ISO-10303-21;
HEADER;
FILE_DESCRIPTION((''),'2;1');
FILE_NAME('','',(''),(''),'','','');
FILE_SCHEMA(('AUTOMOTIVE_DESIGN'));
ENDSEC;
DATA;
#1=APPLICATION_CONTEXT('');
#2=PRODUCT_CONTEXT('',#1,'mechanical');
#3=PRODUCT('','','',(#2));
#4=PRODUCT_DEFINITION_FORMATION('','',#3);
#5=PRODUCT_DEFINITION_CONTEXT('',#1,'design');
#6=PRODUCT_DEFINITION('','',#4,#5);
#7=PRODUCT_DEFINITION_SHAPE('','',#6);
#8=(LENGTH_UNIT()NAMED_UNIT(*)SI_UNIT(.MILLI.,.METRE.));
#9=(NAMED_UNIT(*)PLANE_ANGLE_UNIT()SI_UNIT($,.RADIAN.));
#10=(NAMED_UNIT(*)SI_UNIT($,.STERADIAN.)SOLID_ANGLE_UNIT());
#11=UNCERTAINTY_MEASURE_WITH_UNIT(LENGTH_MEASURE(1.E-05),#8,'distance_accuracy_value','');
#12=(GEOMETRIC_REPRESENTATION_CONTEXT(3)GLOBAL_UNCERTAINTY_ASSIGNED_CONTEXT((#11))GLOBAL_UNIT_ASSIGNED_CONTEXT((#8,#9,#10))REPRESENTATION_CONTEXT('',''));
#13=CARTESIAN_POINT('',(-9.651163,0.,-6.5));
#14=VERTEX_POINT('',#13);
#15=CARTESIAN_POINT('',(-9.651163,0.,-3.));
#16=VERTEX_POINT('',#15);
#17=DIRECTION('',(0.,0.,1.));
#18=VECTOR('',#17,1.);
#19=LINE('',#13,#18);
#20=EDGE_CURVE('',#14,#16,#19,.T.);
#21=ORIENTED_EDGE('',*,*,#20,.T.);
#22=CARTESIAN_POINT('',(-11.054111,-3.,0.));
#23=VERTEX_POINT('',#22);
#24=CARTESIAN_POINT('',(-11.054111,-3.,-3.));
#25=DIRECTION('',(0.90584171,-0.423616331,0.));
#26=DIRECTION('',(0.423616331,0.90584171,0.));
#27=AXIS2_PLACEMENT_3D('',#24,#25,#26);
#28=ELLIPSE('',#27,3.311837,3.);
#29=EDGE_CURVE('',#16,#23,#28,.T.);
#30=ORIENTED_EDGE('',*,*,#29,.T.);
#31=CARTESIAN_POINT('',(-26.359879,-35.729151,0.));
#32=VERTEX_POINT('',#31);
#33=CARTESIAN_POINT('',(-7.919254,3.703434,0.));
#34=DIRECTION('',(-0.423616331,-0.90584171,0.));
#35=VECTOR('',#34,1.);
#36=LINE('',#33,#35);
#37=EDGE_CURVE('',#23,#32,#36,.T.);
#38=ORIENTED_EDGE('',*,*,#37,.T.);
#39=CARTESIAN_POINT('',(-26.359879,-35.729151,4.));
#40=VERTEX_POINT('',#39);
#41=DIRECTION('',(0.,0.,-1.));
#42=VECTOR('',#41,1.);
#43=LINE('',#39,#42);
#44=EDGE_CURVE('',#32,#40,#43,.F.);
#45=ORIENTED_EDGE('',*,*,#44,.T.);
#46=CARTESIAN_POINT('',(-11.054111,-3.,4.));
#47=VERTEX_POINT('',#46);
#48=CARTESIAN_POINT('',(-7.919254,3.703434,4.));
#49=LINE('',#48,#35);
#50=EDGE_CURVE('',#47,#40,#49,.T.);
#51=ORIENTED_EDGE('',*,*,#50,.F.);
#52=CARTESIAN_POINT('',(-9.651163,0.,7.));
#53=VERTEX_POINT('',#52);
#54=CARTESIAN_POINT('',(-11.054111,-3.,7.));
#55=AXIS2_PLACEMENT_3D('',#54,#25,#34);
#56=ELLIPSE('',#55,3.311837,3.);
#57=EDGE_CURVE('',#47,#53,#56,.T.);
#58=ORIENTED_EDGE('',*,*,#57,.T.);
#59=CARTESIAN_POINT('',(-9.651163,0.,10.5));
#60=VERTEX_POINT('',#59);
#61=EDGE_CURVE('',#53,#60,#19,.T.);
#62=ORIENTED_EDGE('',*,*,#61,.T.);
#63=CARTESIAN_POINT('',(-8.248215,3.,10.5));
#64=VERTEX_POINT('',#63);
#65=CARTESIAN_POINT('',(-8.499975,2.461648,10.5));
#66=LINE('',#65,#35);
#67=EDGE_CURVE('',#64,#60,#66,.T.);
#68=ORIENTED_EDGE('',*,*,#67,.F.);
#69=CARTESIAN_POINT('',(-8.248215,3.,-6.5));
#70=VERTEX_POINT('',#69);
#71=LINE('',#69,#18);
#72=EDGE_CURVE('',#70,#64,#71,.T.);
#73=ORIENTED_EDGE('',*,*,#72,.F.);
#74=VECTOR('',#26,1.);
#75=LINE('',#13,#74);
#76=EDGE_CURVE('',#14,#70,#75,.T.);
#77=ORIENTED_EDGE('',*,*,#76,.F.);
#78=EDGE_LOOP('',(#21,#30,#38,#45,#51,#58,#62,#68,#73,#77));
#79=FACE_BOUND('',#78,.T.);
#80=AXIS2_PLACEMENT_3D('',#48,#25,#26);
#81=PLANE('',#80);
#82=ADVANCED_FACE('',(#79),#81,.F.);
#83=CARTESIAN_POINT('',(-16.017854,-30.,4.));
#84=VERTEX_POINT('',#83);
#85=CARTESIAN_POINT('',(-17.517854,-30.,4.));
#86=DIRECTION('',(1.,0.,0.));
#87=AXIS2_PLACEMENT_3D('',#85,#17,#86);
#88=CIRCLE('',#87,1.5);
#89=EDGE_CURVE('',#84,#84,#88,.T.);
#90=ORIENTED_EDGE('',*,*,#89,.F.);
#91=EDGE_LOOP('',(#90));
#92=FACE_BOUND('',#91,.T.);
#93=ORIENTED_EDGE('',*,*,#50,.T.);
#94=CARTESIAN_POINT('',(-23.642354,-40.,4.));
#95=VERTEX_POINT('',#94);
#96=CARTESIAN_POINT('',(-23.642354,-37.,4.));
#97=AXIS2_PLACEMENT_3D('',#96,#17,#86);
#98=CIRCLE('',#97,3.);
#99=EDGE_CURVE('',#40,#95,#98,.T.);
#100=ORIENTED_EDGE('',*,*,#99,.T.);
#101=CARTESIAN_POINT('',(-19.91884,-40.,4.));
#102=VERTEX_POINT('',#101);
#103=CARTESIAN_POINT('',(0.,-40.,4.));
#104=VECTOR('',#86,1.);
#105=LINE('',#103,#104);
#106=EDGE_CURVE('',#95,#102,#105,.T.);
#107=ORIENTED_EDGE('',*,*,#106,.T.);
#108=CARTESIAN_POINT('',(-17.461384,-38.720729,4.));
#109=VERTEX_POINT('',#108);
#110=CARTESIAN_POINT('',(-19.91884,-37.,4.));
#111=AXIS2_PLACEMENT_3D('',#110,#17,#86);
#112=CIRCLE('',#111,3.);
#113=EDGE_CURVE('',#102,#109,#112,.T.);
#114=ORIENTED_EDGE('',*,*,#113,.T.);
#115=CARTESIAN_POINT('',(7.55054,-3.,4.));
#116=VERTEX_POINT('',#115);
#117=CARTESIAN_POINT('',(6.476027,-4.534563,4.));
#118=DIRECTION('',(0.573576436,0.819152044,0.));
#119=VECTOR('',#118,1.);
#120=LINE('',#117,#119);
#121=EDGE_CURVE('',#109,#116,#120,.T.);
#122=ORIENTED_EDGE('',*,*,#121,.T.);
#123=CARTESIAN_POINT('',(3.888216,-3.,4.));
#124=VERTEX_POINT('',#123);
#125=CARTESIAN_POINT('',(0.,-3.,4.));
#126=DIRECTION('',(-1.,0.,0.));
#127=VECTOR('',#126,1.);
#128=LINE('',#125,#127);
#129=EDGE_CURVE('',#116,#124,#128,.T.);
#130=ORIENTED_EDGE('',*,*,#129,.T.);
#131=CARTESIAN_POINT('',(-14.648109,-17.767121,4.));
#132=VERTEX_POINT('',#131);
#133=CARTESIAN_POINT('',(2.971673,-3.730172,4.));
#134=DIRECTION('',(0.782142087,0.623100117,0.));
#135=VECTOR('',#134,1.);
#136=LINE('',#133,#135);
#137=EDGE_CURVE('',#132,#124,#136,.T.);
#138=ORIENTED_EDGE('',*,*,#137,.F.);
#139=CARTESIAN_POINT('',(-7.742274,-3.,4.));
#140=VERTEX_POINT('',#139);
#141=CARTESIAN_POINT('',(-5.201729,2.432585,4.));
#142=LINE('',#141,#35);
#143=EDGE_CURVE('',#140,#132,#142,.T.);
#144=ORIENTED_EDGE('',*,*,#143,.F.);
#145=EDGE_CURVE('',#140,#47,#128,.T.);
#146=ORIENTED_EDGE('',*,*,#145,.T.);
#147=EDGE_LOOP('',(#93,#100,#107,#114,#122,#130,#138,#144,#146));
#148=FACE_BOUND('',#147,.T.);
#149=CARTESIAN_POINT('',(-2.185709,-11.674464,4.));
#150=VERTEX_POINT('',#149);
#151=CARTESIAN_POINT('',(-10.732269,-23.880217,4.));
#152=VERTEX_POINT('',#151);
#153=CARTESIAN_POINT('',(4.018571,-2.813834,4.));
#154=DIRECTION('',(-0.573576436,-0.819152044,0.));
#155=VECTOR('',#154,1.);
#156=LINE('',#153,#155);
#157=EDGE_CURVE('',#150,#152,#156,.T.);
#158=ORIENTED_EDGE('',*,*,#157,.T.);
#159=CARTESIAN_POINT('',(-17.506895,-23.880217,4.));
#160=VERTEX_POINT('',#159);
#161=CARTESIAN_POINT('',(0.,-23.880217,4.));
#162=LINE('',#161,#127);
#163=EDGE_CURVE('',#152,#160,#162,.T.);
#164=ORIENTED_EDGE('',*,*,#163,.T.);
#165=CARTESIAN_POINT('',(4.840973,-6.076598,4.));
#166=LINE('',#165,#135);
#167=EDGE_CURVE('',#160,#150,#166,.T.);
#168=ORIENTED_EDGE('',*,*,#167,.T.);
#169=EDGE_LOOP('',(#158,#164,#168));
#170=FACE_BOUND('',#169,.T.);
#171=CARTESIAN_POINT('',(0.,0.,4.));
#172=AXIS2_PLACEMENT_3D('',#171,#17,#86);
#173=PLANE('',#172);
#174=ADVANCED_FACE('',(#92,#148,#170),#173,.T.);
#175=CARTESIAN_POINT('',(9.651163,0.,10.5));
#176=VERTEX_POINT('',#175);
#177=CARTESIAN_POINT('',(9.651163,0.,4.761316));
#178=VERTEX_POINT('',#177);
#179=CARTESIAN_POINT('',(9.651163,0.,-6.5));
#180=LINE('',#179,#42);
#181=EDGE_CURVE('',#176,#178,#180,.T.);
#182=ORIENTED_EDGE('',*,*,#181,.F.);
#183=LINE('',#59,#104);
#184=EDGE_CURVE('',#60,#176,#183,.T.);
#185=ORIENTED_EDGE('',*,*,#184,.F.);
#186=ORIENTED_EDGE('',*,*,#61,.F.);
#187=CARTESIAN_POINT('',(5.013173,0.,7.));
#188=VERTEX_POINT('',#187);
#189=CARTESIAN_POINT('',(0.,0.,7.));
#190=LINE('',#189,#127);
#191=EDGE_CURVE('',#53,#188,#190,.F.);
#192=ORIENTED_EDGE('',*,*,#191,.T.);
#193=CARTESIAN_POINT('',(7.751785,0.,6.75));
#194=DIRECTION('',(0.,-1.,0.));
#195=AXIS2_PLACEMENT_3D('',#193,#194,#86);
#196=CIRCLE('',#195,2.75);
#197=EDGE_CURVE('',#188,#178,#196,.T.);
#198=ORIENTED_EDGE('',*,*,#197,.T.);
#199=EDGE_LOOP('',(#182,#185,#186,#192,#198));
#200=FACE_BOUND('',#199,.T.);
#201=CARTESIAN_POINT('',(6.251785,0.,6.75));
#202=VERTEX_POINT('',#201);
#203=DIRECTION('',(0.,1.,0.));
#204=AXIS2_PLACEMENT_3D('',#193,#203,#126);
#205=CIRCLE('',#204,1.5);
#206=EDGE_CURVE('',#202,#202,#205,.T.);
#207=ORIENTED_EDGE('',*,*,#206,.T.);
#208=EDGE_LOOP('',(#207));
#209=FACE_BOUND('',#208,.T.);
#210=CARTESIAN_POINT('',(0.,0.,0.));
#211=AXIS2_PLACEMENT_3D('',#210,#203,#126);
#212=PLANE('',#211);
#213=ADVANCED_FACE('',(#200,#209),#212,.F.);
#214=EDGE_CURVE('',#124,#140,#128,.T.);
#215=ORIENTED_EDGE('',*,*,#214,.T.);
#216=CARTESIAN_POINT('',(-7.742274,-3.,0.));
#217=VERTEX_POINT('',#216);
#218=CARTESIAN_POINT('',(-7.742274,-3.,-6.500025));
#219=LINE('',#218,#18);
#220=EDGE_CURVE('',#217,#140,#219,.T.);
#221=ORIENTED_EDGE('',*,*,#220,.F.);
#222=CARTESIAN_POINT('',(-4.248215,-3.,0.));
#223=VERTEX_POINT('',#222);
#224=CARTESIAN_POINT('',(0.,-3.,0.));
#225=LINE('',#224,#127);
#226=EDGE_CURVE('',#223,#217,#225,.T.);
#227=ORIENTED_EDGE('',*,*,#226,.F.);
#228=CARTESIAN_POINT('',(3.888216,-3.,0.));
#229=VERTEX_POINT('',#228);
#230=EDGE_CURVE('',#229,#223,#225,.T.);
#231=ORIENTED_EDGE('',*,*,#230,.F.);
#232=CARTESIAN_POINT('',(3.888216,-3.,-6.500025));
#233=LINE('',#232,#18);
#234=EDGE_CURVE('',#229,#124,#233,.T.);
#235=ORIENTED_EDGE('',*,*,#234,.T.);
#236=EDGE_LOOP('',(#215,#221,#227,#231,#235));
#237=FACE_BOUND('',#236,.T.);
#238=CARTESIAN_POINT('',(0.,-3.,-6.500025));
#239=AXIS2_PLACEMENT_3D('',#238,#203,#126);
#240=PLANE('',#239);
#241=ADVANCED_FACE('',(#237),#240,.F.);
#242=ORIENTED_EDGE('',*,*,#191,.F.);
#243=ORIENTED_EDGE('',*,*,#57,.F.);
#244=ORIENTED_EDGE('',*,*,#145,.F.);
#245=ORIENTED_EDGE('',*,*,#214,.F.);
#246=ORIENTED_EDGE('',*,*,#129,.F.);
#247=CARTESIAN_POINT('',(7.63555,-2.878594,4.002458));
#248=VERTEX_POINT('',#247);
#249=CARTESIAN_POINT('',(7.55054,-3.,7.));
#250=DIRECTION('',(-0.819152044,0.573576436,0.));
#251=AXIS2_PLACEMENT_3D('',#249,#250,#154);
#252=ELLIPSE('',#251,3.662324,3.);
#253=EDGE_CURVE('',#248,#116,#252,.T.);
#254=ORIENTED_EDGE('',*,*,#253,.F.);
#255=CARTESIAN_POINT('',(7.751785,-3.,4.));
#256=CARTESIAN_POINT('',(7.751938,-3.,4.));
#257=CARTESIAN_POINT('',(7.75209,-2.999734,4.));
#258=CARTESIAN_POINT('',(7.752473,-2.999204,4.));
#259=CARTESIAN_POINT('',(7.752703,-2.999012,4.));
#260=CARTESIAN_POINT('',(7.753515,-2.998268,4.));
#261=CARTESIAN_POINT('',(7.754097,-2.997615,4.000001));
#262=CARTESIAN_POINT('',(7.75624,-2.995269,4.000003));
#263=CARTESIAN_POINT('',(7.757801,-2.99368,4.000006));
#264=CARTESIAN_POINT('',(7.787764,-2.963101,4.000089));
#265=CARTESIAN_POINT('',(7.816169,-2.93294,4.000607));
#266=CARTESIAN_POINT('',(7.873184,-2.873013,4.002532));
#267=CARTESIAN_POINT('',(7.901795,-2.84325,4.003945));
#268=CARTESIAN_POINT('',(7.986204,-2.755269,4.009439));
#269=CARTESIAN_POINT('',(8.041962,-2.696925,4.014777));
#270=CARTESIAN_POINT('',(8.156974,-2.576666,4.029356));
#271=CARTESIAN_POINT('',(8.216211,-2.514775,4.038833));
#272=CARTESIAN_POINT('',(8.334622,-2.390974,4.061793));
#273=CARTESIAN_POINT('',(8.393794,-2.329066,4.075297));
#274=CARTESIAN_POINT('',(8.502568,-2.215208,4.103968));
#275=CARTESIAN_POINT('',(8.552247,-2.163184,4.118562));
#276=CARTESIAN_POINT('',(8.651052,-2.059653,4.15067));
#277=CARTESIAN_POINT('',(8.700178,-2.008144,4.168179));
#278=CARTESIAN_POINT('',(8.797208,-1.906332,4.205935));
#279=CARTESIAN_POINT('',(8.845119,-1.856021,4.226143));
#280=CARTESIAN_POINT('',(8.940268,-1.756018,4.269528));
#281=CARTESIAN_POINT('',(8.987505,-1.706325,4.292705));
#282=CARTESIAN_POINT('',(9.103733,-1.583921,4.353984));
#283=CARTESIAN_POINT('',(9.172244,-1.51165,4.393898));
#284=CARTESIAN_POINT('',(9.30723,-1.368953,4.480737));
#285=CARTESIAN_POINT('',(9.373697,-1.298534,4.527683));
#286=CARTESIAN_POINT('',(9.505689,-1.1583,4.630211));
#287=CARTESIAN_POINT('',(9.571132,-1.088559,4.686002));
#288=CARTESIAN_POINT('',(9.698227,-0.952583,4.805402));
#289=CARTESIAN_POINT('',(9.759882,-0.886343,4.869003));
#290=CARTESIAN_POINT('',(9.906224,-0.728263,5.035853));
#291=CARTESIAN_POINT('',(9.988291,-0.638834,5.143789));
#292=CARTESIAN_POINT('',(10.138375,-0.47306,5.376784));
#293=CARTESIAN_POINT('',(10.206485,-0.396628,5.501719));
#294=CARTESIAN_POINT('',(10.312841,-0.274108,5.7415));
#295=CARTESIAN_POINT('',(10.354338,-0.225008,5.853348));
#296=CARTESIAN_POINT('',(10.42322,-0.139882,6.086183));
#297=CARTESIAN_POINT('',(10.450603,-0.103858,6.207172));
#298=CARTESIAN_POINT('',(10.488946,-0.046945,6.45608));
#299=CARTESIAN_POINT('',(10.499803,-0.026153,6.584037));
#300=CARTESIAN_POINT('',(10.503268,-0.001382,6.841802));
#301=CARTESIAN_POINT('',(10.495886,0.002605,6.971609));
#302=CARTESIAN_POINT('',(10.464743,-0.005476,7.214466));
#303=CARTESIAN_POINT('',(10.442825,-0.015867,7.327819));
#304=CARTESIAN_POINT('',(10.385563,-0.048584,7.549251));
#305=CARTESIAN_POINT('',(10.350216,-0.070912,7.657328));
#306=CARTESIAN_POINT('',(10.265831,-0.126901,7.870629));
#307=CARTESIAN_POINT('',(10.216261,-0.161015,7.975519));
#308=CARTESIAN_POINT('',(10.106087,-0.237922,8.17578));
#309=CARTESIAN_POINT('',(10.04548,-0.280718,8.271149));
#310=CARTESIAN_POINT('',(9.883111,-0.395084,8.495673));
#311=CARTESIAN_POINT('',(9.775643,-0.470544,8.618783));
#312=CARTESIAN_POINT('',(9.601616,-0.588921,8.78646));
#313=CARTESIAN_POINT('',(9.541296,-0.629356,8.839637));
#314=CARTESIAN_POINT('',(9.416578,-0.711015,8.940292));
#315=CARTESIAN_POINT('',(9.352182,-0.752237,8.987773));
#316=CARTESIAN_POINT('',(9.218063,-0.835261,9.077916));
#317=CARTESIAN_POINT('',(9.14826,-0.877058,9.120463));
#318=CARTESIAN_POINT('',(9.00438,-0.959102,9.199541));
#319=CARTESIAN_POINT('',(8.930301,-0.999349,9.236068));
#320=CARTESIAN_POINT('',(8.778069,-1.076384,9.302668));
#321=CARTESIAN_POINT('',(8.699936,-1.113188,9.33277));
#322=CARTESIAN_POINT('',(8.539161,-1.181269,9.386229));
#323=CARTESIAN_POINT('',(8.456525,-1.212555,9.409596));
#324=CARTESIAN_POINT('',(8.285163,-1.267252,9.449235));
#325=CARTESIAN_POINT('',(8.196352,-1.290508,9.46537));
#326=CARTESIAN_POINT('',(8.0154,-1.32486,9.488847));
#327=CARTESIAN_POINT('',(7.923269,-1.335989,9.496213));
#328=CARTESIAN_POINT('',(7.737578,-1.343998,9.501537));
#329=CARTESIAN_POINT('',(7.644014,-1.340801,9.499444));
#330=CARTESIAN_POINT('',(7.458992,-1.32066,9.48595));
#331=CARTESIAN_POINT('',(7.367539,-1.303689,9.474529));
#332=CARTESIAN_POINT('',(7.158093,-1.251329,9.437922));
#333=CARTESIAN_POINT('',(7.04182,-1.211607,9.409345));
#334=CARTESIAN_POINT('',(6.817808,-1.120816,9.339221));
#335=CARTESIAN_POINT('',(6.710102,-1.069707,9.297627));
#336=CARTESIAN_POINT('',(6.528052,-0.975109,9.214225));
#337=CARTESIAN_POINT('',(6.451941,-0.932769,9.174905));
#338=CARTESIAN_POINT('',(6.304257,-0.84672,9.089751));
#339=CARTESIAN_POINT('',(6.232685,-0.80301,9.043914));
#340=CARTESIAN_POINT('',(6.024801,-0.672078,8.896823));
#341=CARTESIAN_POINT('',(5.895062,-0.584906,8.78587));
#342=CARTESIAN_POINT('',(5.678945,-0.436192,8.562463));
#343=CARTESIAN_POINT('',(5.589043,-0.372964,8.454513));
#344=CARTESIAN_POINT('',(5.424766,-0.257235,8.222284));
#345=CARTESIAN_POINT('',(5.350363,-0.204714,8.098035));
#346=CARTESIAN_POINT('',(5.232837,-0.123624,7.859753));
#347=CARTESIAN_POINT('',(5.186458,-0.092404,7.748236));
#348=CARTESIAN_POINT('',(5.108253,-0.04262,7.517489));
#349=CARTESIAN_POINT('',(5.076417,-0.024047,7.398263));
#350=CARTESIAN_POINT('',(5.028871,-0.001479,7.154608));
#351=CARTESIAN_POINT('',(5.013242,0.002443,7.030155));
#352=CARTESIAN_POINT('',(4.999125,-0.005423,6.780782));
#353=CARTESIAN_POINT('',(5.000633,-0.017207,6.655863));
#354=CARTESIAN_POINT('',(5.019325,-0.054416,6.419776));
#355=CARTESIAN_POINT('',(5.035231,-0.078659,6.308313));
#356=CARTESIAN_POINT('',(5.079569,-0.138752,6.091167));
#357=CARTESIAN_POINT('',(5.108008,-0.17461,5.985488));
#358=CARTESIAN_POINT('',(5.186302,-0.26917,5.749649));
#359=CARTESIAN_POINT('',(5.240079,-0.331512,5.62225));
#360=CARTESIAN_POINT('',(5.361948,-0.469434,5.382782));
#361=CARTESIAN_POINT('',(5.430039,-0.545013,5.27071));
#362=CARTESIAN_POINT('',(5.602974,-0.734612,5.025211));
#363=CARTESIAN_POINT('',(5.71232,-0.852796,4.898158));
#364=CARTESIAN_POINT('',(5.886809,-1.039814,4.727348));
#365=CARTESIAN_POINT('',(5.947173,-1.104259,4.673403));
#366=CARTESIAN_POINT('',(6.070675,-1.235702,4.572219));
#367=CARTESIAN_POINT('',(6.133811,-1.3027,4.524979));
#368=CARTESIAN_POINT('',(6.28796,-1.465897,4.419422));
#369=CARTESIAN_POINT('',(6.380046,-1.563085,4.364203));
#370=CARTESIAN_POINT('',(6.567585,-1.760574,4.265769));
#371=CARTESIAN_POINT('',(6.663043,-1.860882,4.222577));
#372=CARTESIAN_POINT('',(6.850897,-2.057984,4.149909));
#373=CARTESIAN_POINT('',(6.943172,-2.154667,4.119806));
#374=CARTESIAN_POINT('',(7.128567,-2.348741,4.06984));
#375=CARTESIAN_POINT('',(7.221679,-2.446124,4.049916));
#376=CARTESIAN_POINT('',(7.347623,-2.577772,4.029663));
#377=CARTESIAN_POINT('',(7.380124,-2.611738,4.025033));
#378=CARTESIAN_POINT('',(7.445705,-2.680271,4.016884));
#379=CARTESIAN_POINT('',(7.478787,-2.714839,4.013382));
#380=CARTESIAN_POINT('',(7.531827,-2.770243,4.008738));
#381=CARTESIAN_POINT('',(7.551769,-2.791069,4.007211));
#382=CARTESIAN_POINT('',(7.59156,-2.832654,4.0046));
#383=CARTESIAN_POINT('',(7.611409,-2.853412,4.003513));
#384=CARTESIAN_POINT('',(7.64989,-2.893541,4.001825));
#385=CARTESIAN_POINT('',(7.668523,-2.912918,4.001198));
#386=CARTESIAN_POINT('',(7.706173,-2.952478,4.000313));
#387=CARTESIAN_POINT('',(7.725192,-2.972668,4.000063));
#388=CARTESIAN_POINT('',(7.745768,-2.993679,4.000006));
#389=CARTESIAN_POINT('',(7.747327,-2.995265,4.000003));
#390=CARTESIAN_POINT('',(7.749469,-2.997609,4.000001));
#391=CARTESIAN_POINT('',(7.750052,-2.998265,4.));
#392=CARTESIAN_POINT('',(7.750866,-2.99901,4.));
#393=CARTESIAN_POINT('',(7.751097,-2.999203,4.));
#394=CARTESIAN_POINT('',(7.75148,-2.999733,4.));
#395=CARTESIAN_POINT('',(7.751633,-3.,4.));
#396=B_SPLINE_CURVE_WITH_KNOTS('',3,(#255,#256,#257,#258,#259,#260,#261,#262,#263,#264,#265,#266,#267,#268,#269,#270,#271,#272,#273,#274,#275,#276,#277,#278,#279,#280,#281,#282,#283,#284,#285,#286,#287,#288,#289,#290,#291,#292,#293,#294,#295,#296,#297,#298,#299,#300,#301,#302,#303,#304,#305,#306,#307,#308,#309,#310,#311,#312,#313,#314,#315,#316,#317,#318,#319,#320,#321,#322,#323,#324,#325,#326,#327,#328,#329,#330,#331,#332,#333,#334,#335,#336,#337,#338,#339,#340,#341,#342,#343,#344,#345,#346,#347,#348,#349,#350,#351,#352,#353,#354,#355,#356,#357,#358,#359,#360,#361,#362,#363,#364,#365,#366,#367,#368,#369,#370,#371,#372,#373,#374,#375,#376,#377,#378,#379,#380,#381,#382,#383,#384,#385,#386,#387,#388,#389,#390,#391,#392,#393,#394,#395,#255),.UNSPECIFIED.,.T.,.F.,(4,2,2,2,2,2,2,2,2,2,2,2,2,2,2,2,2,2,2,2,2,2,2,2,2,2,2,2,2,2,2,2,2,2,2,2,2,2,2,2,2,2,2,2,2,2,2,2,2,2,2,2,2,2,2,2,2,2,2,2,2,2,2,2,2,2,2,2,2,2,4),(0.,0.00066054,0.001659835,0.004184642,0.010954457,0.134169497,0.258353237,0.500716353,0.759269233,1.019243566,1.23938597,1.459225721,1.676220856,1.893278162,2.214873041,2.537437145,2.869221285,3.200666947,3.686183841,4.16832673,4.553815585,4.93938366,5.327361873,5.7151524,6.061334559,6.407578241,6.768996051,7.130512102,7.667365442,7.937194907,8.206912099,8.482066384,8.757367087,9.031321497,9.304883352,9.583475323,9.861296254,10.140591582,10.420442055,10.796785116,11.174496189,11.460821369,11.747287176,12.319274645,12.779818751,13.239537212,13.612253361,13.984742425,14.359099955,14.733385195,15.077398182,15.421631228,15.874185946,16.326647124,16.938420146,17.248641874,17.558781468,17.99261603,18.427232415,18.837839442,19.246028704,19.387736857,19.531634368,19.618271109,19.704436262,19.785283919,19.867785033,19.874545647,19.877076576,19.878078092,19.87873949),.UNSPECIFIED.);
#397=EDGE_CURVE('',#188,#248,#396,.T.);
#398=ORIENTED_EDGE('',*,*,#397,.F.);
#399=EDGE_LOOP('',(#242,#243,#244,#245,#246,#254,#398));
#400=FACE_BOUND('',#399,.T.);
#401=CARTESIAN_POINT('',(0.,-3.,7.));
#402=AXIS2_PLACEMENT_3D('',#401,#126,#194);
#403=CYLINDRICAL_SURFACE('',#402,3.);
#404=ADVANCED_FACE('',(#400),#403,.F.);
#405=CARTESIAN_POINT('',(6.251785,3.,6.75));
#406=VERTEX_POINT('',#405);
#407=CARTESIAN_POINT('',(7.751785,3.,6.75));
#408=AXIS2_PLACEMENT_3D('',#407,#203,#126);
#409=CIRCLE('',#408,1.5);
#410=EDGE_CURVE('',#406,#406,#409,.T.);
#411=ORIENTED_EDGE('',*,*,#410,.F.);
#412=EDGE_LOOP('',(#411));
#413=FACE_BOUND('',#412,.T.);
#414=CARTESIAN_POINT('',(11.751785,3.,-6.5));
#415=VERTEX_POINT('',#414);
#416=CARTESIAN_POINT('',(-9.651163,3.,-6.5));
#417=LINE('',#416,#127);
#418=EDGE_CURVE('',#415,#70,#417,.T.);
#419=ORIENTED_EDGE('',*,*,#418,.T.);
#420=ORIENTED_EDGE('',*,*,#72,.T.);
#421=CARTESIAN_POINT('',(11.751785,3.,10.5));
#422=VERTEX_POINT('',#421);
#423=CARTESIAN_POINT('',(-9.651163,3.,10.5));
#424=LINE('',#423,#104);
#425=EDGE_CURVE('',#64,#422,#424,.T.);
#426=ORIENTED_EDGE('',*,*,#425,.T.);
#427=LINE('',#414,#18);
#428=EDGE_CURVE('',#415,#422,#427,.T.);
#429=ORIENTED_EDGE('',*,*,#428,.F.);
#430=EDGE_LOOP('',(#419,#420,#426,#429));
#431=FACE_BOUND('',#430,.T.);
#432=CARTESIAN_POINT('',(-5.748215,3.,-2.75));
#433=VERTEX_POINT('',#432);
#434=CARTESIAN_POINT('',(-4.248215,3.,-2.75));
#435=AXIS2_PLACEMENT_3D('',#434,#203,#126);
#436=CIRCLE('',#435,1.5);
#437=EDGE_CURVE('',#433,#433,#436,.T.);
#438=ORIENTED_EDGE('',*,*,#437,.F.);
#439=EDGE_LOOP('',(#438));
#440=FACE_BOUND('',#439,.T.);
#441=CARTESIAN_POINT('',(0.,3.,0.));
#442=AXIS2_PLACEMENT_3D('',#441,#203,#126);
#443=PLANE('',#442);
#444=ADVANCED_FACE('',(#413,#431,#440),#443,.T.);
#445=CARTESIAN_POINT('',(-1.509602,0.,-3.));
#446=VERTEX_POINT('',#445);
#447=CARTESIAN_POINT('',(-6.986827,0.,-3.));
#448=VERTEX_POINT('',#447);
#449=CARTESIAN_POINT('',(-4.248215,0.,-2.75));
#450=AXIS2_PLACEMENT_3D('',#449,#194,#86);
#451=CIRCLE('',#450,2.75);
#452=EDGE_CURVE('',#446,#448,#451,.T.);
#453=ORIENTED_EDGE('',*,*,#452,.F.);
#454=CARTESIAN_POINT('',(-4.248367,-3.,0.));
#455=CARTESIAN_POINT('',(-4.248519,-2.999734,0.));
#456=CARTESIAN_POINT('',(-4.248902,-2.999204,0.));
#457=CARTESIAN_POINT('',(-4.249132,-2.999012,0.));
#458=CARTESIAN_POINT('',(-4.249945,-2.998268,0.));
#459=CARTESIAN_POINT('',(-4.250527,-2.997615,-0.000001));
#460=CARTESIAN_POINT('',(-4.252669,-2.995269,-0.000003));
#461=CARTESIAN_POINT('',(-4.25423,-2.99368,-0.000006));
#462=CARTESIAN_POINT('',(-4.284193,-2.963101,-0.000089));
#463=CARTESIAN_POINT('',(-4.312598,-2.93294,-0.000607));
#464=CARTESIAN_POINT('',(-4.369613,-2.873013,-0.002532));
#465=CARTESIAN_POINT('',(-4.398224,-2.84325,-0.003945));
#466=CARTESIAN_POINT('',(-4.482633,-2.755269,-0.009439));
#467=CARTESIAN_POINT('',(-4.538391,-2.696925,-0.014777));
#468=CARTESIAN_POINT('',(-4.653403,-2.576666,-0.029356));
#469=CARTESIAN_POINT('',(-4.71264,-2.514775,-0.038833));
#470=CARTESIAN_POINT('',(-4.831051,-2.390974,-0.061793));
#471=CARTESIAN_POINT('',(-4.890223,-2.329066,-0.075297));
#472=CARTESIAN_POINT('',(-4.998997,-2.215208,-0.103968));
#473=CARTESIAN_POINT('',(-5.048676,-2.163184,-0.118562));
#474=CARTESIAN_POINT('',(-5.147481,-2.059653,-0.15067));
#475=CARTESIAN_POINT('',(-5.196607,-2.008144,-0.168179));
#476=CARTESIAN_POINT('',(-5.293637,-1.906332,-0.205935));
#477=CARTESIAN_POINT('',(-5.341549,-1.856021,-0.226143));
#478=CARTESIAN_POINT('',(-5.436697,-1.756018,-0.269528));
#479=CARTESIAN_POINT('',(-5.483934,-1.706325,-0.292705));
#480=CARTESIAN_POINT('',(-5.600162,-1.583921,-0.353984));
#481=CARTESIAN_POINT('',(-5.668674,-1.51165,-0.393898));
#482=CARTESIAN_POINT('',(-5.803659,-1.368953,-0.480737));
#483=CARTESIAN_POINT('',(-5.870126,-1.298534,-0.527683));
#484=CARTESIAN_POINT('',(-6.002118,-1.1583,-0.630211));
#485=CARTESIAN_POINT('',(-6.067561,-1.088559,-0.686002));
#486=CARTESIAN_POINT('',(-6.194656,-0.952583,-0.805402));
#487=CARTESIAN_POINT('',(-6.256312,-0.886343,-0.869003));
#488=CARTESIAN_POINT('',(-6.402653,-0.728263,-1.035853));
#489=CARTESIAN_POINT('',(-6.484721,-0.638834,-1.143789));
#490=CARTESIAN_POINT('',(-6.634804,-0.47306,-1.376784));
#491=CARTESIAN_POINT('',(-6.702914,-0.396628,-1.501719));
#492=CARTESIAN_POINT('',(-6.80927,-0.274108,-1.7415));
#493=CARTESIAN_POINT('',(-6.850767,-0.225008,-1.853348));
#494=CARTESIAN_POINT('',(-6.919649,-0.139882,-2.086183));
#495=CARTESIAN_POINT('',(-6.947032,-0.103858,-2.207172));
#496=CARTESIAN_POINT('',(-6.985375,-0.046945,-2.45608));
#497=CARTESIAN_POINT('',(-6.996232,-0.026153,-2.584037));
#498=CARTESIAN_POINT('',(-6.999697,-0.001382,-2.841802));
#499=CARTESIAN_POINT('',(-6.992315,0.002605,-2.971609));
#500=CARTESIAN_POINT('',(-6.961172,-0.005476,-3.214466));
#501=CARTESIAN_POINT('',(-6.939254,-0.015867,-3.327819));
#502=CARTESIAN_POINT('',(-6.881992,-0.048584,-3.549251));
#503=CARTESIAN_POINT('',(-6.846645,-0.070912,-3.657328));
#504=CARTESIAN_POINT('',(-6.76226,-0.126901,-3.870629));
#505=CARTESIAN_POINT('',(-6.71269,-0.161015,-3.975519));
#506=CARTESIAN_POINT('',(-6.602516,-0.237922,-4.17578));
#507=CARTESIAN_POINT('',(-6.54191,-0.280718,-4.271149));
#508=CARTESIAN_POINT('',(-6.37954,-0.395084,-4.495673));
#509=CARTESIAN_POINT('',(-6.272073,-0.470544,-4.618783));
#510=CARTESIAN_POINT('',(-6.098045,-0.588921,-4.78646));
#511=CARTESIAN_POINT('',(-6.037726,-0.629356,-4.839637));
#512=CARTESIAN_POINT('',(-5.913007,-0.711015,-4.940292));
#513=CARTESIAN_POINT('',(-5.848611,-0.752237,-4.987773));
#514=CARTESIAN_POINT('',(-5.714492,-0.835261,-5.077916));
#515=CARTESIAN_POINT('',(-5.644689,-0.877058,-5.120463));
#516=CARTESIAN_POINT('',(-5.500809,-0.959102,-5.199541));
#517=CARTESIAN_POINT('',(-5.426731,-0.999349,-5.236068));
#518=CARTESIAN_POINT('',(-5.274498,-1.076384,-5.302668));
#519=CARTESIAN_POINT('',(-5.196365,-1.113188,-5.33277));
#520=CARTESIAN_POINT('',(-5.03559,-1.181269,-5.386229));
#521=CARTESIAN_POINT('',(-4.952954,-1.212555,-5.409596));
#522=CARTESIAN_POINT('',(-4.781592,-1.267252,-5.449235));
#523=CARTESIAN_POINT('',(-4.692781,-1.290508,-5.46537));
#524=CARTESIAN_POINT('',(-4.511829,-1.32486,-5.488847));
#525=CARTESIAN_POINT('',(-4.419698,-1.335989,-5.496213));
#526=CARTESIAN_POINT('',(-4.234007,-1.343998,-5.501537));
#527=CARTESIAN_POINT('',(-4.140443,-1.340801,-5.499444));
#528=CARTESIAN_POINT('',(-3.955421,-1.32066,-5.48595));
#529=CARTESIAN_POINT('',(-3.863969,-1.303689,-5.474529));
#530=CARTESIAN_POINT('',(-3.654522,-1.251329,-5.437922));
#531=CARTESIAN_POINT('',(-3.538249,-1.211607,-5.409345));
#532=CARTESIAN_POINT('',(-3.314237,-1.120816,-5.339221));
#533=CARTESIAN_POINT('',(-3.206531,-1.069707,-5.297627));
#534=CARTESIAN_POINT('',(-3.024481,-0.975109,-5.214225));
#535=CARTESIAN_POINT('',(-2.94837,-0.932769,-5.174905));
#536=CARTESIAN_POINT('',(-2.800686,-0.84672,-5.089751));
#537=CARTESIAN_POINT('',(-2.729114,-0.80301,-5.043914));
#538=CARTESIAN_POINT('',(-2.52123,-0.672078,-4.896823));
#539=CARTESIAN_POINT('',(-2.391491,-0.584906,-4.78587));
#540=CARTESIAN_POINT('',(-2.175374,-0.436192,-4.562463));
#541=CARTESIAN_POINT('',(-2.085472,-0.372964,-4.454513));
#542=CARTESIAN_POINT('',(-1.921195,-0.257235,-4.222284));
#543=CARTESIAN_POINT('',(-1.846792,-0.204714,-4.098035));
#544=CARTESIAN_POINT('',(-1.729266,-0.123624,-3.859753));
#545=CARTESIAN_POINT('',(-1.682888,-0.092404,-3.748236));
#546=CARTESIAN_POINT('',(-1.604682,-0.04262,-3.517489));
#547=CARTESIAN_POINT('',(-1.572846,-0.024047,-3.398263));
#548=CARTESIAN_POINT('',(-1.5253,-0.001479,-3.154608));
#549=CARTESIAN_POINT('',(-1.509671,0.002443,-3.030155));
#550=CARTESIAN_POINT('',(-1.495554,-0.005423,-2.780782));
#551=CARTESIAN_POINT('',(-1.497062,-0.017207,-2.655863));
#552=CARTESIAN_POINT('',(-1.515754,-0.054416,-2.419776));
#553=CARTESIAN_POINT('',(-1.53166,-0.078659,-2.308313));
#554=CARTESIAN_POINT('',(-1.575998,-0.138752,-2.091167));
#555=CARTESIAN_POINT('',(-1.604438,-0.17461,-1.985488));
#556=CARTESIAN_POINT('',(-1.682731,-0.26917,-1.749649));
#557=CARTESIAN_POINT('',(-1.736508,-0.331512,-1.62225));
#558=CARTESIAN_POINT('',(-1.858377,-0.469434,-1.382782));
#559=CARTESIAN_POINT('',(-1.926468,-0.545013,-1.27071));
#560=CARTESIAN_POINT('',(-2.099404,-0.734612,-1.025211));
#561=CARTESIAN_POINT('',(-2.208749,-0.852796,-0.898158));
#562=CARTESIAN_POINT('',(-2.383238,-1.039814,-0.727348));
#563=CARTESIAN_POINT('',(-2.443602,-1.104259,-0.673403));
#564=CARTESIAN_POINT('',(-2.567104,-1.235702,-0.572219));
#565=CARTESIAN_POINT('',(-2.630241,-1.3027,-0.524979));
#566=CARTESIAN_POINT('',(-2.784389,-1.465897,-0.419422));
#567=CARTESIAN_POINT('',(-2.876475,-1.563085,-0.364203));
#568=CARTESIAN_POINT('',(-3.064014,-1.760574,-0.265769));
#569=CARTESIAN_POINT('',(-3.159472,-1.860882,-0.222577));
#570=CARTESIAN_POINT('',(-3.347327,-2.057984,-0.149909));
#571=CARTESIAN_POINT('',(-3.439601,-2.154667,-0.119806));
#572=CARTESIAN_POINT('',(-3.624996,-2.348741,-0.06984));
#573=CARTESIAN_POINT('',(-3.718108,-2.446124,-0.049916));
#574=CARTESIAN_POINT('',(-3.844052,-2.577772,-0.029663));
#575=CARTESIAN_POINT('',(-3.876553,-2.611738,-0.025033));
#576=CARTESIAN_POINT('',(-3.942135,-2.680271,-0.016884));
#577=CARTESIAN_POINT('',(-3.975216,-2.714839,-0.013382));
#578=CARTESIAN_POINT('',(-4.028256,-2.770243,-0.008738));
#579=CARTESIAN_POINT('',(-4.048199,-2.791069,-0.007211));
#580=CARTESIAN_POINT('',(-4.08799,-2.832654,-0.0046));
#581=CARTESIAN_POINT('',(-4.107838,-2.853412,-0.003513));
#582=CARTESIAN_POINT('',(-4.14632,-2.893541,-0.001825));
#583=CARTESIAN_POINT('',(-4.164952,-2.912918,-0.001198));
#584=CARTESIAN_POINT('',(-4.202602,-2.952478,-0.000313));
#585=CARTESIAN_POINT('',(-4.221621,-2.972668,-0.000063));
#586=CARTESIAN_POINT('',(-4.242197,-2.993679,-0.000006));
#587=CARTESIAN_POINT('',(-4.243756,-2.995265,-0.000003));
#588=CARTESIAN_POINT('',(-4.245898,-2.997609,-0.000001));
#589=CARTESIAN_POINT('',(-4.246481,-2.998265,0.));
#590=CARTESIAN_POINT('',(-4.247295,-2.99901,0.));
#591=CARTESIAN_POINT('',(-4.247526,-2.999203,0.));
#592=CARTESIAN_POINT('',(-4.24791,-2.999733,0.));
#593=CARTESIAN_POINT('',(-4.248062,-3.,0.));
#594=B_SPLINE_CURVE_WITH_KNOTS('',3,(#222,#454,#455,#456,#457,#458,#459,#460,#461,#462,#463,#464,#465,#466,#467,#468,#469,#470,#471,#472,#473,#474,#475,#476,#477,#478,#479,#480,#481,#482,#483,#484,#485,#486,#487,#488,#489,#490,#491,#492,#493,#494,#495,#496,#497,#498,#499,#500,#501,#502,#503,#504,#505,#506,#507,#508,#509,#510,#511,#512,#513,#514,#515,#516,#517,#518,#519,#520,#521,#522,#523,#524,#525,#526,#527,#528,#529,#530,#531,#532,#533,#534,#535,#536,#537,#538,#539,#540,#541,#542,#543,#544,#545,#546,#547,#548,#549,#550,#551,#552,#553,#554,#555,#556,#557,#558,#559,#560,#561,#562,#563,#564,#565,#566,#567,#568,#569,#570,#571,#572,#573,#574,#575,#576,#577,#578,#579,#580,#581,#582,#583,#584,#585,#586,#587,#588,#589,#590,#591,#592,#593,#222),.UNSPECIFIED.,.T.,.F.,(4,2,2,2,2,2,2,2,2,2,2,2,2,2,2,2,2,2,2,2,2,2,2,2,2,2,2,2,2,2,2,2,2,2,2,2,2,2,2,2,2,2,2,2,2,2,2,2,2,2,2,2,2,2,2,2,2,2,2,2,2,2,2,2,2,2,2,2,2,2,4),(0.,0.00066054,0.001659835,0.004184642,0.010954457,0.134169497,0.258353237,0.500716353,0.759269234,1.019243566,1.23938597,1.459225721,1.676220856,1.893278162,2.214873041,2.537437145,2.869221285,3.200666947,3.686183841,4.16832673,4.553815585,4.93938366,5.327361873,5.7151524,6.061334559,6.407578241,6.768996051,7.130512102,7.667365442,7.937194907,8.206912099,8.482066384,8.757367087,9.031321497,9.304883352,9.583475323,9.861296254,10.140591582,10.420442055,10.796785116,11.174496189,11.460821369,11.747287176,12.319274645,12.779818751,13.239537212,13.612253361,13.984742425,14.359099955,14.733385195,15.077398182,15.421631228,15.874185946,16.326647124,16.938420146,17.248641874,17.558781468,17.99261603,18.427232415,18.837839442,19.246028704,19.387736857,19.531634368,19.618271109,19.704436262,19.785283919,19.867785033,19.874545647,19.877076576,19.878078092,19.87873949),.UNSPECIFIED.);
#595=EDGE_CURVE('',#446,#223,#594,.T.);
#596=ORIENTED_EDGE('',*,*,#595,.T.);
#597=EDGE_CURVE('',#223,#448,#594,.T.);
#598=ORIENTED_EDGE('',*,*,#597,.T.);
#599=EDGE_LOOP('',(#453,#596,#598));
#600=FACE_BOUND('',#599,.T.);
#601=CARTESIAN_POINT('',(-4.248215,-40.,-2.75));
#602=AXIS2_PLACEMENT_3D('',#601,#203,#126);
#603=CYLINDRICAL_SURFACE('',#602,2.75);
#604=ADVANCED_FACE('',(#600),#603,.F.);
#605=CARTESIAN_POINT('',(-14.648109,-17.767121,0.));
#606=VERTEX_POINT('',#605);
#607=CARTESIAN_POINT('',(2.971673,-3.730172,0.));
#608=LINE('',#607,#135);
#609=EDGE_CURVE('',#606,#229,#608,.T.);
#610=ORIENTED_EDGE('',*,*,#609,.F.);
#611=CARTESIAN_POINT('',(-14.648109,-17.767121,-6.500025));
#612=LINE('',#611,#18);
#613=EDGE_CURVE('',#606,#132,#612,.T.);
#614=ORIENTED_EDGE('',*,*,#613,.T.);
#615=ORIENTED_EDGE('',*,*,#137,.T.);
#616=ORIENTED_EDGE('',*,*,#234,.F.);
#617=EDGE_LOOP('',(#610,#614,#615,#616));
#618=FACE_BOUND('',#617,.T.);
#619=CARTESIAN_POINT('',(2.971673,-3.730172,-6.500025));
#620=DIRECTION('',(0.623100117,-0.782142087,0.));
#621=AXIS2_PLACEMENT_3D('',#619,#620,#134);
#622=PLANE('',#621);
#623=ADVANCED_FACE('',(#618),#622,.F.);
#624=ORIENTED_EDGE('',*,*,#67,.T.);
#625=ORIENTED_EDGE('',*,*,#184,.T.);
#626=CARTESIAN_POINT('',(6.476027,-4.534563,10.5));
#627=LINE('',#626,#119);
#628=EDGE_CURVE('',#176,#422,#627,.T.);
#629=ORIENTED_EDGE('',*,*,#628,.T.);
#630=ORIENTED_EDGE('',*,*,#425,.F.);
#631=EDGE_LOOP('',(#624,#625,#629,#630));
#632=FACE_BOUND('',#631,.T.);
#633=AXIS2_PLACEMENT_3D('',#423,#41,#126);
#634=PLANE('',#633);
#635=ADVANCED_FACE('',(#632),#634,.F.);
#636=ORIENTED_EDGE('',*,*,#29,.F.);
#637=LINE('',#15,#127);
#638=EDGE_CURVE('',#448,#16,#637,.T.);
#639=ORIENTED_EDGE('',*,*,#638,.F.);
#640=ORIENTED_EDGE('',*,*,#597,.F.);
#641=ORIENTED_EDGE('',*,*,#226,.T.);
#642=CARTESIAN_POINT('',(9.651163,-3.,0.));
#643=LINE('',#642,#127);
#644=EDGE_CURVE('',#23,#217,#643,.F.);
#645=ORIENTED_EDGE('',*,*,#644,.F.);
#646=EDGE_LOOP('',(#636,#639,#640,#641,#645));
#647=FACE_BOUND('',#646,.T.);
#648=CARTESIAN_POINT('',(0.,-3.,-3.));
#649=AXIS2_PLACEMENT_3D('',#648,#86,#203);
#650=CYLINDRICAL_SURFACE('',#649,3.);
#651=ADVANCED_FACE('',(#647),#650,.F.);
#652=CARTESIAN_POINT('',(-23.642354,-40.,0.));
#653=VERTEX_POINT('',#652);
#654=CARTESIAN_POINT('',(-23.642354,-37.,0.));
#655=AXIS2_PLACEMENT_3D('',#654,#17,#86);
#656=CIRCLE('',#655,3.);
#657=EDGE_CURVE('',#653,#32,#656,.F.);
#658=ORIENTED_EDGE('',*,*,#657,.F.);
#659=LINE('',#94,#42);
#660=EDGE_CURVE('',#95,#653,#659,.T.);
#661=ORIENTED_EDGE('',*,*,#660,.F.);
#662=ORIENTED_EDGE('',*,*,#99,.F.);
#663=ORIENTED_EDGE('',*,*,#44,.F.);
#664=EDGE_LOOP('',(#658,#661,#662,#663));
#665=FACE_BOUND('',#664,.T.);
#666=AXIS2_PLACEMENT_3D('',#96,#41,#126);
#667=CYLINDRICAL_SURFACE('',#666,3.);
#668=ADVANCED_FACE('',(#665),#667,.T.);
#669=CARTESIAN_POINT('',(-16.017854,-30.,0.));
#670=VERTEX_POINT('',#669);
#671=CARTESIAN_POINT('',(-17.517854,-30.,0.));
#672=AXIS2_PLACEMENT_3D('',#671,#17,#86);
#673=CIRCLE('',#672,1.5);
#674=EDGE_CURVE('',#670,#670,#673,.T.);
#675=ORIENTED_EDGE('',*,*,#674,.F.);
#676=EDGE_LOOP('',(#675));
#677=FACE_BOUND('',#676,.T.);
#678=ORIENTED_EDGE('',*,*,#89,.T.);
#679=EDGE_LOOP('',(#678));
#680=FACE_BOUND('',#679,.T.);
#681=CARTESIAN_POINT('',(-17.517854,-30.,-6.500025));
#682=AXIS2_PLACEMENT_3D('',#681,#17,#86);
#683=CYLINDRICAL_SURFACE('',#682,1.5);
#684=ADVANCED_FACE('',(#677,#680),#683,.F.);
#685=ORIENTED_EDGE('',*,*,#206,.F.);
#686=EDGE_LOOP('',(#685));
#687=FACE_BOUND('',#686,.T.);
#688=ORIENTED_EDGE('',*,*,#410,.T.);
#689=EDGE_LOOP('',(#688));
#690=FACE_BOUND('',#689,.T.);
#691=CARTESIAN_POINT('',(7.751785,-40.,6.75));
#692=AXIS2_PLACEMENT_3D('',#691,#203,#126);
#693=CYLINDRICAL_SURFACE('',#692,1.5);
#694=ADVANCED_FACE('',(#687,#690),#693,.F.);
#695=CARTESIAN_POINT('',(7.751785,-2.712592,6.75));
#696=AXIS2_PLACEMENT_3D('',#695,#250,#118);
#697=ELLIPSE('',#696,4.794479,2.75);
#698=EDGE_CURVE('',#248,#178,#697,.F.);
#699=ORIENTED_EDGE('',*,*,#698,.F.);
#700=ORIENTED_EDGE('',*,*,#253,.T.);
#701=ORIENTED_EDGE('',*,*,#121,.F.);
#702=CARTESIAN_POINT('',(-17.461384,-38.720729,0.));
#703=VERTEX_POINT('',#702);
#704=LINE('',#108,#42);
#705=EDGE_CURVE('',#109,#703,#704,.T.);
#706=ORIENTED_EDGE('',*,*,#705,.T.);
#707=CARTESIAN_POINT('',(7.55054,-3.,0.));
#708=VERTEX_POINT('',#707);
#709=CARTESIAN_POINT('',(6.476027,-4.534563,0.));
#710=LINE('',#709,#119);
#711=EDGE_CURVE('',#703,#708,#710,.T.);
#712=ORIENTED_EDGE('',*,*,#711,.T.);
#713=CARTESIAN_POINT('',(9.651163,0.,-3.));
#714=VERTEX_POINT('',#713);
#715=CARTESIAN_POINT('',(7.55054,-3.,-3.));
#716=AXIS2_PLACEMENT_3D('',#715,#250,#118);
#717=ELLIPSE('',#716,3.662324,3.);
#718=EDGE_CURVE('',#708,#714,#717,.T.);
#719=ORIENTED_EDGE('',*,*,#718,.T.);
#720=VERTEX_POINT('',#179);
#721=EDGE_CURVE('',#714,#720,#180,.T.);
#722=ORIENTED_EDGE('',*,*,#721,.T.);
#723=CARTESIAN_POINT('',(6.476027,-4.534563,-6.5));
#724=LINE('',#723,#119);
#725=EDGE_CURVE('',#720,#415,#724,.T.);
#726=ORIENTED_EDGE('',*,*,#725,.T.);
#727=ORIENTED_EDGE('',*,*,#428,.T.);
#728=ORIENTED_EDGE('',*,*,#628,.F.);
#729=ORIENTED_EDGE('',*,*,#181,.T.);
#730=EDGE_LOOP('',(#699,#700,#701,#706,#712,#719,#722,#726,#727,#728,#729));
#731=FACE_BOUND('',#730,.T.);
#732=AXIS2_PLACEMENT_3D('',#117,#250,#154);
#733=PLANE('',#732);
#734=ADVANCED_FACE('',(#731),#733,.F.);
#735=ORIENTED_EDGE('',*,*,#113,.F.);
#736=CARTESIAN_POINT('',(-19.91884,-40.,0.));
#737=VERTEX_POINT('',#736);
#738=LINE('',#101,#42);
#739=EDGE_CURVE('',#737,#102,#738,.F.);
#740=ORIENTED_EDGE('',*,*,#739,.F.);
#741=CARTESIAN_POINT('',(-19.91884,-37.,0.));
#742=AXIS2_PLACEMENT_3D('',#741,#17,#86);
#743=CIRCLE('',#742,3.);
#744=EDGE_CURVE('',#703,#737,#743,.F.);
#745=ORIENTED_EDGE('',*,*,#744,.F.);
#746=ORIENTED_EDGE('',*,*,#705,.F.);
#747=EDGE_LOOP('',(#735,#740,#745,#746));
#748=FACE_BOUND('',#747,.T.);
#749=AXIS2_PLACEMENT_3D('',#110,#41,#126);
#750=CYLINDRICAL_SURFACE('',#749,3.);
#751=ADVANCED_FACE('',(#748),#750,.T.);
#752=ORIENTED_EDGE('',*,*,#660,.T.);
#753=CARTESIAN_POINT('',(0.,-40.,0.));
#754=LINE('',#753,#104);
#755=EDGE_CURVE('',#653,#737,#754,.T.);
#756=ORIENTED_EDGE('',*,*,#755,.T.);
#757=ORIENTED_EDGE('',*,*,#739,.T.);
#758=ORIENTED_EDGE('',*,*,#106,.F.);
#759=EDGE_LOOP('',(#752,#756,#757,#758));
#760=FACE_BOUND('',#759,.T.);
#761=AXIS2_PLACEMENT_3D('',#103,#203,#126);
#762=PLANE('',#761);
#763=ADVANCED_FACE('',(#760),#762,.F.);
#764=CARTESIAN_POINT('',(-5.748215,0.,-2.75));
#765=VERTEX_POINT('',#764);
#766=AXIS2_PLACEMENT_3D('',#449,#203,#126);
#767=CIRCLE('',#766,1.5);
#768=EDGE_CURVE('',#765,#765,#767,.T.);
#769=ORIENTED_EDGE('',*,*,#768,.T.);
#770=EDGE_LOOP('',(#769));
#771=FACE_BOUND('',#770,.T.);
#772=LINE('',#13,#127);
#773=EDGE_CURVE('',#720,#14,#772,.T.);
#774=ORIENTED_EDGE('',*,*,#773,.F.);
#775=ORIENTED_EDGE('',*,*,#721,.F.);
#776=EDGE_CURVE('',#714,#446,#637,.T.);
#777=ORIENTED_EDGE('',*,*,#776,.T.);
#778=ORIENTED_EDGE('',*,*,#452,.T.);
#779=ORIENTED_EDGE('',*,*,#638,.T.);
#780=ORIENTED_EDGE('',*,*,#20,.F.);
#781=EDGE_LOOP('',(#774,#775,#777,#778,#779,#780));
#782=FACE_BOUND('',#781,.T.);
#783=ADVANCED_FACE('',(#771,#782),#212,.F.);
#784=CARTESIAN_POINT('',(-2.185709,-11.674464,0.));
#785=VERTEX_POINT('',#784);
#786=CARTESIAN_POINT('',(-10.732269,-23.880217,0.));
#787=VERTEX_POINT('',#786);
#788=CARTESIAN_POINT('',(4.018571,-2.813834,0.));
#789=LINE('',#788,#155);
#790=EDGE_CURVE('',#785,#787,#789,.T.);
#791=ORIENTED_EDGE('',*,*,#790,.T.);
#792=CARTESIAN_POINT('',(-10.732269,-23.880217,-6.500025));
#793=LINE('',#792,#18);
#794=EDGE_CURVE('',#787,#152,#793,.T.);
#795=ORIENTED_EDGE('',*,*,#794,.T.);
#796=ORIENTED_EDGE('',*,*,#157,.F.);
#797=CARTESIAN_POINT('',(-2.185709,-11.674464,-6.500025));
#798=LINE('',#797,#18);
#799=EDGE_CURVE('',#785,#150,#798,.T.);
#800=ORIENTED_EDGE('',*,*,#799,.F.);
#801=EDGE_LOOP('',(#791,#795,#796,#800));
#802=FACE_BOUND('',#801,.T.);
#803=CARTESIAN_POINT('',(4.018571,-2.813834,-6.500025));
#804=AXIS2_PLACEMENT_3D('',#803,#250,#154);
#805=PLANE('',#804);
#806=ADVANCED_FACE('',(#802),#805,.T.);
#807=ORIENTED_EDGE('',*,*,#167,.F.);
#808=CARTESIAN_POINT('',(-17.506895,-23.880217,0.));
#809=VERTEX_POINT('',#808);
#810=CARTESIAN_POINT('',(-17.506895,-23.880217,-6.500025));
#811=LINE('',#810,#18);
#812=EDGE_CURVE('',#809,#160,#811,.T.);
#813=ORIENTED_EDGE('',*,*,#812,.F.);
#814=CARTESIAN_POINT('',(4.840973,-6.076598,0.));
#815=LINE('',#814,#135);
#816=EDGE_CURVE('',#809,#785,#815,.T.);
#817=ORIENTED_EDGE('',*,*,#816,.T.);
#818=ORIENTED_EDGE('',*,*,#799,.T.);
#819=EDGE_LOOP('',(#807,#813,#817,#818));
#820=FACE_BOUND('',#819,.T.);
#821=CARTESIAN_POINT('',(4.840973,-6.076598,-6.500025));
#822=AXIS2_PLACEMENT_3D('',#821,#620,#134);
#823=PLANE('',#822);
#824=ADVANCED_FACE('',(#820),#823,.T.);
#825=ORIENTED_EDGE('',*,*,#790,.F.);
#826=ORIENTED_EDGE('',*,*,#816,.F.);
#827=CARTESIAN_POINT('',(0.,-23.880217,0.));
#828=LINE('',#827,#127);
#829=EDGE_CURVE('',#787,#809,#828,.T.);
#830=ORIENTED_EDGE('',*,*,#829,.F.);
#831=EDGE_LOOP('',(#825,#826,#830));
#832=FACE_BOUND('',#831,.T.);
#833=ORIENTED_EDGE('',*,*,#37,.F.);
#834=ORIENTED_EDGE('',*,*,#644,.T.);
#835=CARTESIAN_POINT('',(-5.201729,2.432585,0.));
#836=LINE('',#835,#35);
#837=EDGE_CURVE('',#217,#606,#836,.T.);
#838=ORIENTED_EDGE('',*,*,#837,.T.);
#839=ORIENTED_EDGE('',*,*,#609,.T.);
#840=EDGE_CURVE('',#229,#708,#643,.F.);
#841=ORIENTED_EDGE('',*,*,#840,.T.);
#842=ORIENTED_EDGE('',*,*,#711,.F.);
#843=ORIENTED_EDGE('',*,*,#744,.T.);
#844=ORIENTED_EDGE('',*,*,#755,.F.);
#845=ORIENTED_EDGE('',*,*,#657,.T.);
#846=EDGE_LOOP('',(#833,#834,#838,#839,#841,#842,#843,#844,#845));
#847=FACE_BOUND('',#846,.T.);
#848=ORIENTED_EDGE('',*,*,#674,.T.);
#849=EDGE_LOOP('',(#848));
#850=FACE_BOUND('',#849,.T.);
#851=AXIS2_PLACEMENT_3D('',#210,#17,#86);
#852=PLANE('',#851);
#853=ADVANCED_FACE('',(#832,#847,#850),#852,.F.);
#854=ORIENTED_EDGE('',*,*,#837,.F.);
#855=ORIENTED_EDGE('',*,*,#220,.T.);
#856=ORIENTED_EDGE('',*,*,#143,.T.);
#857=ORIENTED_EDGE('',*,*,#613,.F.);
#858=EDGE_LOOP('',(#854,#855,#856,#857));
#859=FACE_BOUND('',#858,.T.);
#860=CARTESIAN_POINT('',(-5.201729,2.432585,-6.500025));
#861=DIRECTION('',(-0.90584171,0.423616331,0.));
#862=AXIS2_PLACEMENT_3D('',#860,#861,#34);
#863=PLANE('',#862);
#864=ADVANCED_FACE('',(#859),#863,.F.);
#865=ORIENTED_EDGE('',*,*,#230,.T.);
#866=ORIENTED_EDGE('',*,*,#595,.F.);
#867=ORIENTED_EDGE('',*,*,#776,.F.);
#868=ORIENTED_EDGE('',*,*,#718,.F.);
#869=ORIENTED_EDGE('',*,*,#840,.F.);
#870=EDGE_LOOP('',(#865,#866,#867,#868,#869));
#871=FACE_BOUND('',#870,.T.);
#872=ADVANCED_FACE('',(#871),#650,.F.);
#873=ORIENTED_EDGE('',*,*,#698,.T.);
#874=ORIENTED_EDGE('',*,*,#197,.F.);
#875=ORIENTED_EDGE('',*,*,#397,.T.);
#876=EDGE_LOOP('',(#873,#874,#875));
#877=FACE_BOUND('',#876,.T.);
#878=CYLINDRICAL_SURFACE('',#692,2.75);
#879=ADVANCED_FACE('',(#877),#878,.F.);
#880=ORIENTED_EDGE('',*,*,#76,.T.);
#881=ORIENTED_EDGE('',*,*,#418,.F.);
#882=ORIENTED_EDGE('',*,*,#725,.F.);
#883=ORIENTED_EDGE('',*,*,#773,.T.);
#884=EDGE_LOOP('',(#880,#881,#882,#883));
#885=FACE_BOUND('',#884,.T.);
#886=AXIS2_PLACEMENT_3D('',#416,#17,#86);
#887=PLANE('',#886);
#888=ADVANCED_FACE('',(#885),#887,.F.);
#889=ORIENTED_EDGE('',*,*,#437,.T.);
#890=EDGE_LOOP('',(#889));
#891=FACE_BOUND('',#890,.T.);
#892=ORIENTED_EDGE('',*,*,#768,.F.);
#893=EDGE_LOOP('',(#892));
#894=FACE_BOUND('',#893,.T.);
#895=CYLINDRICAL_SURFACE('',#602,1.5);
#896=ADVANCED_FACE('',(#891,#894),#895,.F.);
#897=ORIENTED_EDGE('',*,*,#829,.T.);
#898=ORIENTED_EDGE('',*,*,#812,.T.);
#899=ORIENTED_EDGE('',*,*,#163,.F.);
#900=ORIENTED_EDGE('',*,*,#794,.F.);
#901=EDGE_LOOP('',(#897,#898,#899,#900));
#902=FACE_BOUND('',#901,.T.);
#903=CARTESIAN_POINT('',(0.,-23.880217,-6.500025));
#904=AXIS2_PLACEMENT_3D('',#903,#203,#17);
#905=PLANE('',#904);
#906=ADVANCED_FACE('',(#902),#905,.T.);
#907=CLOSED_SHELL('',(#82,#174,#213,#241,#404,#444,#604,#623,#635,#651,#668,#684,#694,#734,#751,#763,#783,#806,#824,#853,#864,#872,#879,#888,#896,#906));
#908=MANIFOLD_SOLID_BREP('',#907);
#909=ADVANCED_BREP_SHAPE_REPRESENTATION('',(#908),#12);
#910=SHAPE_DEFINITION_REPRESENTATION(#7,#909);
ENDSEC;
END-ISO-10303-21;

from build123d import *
from build123d.topology import SkipClean

# Parameters (mm, degrees)
BOSS_EXTRUDE1_DEPTH     = 4
SKETCH2_W               = 19.302325582
SKETCH2_H               = 17
BOSS_EXTRUDE2_DEPTH     = 3
CUT_EXTRUDE1_DEPTH      = 52.89534967
CUT_EXTRUDE1_DEPTH_BACK = 52.89534967
BOSS_EXTRUDE3_DEPTH     = 17
FILLET1_R               = 3
CUT_EXTRUDE2_DEPTH      = 50.194156235
CUT_EXTRUDE2_DEPTH_BACK = 50.194156235
SKETCH5_R               = 1.5
CUT_EXTRUDE3_DEPTH      = 52.662994567
CUT_EXTRUDE3_DEPTH_BACK = 52.662994567
SKETCH6_R               = 1.5
FILLET2_R               = 3
SKETCH7_R               = 2.75
CUT_EXTRUDE5_DEPTH      = 50.194156235


with BuildPart() as part:
    # Sketch1 → Boss-Extrude1 (new body)
    with BuildSketch(Plane.XY):
        Polygon((-28.357138738, -40), (-18.357138738, -40), (9.651162791, 0), (-9.651162791, 0), align=None)
    extrude(amount=BOSS_EXTRUDE1_DEPTH)

    # Sketch2 → Boss-Extrude2 (add)
    with BuildSketch(Plane(origin=(0, 0, 0), x_dir=(1, 0, 0), z_dir=(0, 1, 0))):
        with Locations((0, -2)):
            Rectangle(SKETCH2_W, SKETCH2_H)
    extrude(amount=BOSS_EXTRUDE2_DEPTH)

    # Sketch3 → Cut-Extrude1 (cut, two sides: drawn at the far end of the back side and taken through both)
    with BuildSketch(Plane.XY.offset(10.5).offset(-CUT_EXTRUDE1_DEPTH_BACK)):
        Polygon((-9.651162791, 0), (-8.248214595, 3), (-9.651162791, 3), align=None)
    extrude(amount=CUT_EXTRUDE1_DEPTH + CUT_EXTRUDE1_DEPTH_BACK, mode=Mode.SUBTRACT)

    # Sketch4 → Boss-Extrude3 (add, through all)
    with BuildSketch(Plane.XY.offset(10.5)):
        Polygon((9.651162791, 3), (9.651162791, 0), (11.751785405, 3), align=None)
    extrude(amount=-BOSS_EXTRUDE3_DEPTH)

    # Fillet1
    fillet1_edges = [part.edges().sort_by_distance(p)[0] for p in [
        (-18.357138738, -40, 2),
        (-28.357138738, -40, 2),
    ]]
    fillet(fillet1_edges, radius=FILLET1_R)

    # Sketch5 → Cut-Extrude2 (cut, two sides: drawn at the far end of the back side and taken through both)
    with BuildSketch(Plane.XY.offset(4).offset(-CUT_EXTRUDE2_DEPTH_BACK)):
        with Locations((-17.517854053, -30)):
            Circle(SKETCH5_R)
        Polygon((-10.732268808, -23.880216821), (-17.506894929, -23.880216821), (-2.185708769, -11.674464137), align=None)
        Polygon((-14.648109244, -17.767120785), (3.88821641, -3), (-7.742274088, -3), align=None)
    extrude(amount=CUT_EXTRUDE2_DEPTH + CUT_EXTRUDE2_DEPTH_BACK, mode=Mode.SUBTRACT)

    # Sketch6 → Cut-Extrude3 (cut, two sides: drawn at the far end of the back side and taken through both)
    with BuildSketch(Plane(origin=(0, 3, 0), x_dir=(1, 0, 0), z_dir=(0, 1, 0)).offset(-CUT_EXTRUDE3_DEPTH_BACK)):
        with Locations(Location((-4.248214595, 2.75, 0), (0, 0, 180))):
            Circle(SKETCH6_R)
        with Locations(Location((7.751785405, -6.75, 0), (0, 0, 180))):
            Circle(SKETCH6_R)
    extrude(amount=CUT_EXTRUDE3_DEPTH + CUT_EXTRUDE3_DEPTH_BACK, mode=Mode.SUBTRACT)

    # Fillet2
    # the kernel refuses this fillet: 3 mm, written as the material it adds along each edge
    with BuildSketch(Plane(origin=(17.151162791, 0, 0), x_dir=(0, -1, 0), z_dir=(-1, 0, 0))) as fillet2_piece_1_section:
        with BuildLine():
            CenterArc((FILLET2_R, -FILLET2_R), FILLET2_R, 90, 90)
            Line((0, -FILLET2_R), (0, 0))
            Line((0, 0), (FILLET2_R, 0))
        make_face()
    fillet2_piece_1 = extrude(amount=34.302325581, mode=Mode.PRIVATE)
    fillet2_piece_1 = split(fillet2_piece_1, bisect_by=Plane(origin=(8.707650451, -1.347475267, -0.62141613), z_dir=(-0.8191520442889888, 0.5735764363510504, 0)), keep=Keep.TOP, mode=Mode.PRIVATE)
    fillet2_piece_1 = split(fillet2_piece_1, bisect_by=Plane(origin=(-6.80101607, 6.094622871, -0.62141613), z_dir=(0.9058417102512069, -0.42361633109356, 0)), keep=Keep.TOP, mode=Mode.PRIVATE)
    fillet2_piece_1 = fillet2_piece_1 - Plane(origin=(-4.248214595, -0.776972683, -2.75), x_dir=(-1, 0, 0), z_dir=(0, 1, 0)) * Cylinder(1.5, 81, mode=Mode.PRIVATE)
    add(fillet2_piece_1)
    with BuildSketch(Plane(origin=(17.151162791, 0, 4), x_dir=(0, -1, 0), z_dir=(-1, 0, 0))) as fillet2_piece_2_section:
        with BuildLine():
            CenterArc((FILLET2_R, FILLET2_R), FILLET2_R, 180, 90)
            Line((0, FILLET2_R), (0, 0))
            Line((0, 0), (FILLET2_R, 0))
        make_face()
    fillet2_piece_2 = extrude(amount=34.302325581, mode=Mode.PRIVATE)
    fillet2_piece_2 = split(fillet2_piece_2, bisect_by=Plane(origin=(8.664647852, -1.408889344, 4.489642882), z_dir=(-0.8191520442889888, 0.5735764363510504, 0)), keep=Keep.TOP, mode=Mode.PRIVATE)
    fillet2_piece_2 = split(fillet2_piece_2, bisect_by=Plane(origin=(-6.833394213, 6.025386936, 4.489642882), z_dir=(0.9058417102512069, -0.42361633109356, 0)), keep=Keep.TOP, mode=Mode.PRIVATE)
    fillet2_piece_2 = fillet2_piece_2 - Plane(origin=(7.751785405, -0.84697785, 6.75), x_dir=(-1, 0, 0), z_dir=(0, 1, 0)) * Cylinder(1.5, 81, mode=Mode.PRIVATE)
    add(fillet2_piece_2)

    # Sketch7 → Cut-Extrude5 (cut, through all)
    with SkipClean():  # the faces are left unmerged after this step: merging them gives an invalid solid
        with BuildSketch(Plane.XZ):
            with Locations((-4.248214595, -2.75)):
                Circle(SKETCH7_R)
            with Locations((7.751785405, 6.75)):
                Circle(SKETCH7_R)
        extrude(amount=CUT_EXTRUDE5_DEPTH, mode=Mode.SUBTRACT)


solid = part.part
